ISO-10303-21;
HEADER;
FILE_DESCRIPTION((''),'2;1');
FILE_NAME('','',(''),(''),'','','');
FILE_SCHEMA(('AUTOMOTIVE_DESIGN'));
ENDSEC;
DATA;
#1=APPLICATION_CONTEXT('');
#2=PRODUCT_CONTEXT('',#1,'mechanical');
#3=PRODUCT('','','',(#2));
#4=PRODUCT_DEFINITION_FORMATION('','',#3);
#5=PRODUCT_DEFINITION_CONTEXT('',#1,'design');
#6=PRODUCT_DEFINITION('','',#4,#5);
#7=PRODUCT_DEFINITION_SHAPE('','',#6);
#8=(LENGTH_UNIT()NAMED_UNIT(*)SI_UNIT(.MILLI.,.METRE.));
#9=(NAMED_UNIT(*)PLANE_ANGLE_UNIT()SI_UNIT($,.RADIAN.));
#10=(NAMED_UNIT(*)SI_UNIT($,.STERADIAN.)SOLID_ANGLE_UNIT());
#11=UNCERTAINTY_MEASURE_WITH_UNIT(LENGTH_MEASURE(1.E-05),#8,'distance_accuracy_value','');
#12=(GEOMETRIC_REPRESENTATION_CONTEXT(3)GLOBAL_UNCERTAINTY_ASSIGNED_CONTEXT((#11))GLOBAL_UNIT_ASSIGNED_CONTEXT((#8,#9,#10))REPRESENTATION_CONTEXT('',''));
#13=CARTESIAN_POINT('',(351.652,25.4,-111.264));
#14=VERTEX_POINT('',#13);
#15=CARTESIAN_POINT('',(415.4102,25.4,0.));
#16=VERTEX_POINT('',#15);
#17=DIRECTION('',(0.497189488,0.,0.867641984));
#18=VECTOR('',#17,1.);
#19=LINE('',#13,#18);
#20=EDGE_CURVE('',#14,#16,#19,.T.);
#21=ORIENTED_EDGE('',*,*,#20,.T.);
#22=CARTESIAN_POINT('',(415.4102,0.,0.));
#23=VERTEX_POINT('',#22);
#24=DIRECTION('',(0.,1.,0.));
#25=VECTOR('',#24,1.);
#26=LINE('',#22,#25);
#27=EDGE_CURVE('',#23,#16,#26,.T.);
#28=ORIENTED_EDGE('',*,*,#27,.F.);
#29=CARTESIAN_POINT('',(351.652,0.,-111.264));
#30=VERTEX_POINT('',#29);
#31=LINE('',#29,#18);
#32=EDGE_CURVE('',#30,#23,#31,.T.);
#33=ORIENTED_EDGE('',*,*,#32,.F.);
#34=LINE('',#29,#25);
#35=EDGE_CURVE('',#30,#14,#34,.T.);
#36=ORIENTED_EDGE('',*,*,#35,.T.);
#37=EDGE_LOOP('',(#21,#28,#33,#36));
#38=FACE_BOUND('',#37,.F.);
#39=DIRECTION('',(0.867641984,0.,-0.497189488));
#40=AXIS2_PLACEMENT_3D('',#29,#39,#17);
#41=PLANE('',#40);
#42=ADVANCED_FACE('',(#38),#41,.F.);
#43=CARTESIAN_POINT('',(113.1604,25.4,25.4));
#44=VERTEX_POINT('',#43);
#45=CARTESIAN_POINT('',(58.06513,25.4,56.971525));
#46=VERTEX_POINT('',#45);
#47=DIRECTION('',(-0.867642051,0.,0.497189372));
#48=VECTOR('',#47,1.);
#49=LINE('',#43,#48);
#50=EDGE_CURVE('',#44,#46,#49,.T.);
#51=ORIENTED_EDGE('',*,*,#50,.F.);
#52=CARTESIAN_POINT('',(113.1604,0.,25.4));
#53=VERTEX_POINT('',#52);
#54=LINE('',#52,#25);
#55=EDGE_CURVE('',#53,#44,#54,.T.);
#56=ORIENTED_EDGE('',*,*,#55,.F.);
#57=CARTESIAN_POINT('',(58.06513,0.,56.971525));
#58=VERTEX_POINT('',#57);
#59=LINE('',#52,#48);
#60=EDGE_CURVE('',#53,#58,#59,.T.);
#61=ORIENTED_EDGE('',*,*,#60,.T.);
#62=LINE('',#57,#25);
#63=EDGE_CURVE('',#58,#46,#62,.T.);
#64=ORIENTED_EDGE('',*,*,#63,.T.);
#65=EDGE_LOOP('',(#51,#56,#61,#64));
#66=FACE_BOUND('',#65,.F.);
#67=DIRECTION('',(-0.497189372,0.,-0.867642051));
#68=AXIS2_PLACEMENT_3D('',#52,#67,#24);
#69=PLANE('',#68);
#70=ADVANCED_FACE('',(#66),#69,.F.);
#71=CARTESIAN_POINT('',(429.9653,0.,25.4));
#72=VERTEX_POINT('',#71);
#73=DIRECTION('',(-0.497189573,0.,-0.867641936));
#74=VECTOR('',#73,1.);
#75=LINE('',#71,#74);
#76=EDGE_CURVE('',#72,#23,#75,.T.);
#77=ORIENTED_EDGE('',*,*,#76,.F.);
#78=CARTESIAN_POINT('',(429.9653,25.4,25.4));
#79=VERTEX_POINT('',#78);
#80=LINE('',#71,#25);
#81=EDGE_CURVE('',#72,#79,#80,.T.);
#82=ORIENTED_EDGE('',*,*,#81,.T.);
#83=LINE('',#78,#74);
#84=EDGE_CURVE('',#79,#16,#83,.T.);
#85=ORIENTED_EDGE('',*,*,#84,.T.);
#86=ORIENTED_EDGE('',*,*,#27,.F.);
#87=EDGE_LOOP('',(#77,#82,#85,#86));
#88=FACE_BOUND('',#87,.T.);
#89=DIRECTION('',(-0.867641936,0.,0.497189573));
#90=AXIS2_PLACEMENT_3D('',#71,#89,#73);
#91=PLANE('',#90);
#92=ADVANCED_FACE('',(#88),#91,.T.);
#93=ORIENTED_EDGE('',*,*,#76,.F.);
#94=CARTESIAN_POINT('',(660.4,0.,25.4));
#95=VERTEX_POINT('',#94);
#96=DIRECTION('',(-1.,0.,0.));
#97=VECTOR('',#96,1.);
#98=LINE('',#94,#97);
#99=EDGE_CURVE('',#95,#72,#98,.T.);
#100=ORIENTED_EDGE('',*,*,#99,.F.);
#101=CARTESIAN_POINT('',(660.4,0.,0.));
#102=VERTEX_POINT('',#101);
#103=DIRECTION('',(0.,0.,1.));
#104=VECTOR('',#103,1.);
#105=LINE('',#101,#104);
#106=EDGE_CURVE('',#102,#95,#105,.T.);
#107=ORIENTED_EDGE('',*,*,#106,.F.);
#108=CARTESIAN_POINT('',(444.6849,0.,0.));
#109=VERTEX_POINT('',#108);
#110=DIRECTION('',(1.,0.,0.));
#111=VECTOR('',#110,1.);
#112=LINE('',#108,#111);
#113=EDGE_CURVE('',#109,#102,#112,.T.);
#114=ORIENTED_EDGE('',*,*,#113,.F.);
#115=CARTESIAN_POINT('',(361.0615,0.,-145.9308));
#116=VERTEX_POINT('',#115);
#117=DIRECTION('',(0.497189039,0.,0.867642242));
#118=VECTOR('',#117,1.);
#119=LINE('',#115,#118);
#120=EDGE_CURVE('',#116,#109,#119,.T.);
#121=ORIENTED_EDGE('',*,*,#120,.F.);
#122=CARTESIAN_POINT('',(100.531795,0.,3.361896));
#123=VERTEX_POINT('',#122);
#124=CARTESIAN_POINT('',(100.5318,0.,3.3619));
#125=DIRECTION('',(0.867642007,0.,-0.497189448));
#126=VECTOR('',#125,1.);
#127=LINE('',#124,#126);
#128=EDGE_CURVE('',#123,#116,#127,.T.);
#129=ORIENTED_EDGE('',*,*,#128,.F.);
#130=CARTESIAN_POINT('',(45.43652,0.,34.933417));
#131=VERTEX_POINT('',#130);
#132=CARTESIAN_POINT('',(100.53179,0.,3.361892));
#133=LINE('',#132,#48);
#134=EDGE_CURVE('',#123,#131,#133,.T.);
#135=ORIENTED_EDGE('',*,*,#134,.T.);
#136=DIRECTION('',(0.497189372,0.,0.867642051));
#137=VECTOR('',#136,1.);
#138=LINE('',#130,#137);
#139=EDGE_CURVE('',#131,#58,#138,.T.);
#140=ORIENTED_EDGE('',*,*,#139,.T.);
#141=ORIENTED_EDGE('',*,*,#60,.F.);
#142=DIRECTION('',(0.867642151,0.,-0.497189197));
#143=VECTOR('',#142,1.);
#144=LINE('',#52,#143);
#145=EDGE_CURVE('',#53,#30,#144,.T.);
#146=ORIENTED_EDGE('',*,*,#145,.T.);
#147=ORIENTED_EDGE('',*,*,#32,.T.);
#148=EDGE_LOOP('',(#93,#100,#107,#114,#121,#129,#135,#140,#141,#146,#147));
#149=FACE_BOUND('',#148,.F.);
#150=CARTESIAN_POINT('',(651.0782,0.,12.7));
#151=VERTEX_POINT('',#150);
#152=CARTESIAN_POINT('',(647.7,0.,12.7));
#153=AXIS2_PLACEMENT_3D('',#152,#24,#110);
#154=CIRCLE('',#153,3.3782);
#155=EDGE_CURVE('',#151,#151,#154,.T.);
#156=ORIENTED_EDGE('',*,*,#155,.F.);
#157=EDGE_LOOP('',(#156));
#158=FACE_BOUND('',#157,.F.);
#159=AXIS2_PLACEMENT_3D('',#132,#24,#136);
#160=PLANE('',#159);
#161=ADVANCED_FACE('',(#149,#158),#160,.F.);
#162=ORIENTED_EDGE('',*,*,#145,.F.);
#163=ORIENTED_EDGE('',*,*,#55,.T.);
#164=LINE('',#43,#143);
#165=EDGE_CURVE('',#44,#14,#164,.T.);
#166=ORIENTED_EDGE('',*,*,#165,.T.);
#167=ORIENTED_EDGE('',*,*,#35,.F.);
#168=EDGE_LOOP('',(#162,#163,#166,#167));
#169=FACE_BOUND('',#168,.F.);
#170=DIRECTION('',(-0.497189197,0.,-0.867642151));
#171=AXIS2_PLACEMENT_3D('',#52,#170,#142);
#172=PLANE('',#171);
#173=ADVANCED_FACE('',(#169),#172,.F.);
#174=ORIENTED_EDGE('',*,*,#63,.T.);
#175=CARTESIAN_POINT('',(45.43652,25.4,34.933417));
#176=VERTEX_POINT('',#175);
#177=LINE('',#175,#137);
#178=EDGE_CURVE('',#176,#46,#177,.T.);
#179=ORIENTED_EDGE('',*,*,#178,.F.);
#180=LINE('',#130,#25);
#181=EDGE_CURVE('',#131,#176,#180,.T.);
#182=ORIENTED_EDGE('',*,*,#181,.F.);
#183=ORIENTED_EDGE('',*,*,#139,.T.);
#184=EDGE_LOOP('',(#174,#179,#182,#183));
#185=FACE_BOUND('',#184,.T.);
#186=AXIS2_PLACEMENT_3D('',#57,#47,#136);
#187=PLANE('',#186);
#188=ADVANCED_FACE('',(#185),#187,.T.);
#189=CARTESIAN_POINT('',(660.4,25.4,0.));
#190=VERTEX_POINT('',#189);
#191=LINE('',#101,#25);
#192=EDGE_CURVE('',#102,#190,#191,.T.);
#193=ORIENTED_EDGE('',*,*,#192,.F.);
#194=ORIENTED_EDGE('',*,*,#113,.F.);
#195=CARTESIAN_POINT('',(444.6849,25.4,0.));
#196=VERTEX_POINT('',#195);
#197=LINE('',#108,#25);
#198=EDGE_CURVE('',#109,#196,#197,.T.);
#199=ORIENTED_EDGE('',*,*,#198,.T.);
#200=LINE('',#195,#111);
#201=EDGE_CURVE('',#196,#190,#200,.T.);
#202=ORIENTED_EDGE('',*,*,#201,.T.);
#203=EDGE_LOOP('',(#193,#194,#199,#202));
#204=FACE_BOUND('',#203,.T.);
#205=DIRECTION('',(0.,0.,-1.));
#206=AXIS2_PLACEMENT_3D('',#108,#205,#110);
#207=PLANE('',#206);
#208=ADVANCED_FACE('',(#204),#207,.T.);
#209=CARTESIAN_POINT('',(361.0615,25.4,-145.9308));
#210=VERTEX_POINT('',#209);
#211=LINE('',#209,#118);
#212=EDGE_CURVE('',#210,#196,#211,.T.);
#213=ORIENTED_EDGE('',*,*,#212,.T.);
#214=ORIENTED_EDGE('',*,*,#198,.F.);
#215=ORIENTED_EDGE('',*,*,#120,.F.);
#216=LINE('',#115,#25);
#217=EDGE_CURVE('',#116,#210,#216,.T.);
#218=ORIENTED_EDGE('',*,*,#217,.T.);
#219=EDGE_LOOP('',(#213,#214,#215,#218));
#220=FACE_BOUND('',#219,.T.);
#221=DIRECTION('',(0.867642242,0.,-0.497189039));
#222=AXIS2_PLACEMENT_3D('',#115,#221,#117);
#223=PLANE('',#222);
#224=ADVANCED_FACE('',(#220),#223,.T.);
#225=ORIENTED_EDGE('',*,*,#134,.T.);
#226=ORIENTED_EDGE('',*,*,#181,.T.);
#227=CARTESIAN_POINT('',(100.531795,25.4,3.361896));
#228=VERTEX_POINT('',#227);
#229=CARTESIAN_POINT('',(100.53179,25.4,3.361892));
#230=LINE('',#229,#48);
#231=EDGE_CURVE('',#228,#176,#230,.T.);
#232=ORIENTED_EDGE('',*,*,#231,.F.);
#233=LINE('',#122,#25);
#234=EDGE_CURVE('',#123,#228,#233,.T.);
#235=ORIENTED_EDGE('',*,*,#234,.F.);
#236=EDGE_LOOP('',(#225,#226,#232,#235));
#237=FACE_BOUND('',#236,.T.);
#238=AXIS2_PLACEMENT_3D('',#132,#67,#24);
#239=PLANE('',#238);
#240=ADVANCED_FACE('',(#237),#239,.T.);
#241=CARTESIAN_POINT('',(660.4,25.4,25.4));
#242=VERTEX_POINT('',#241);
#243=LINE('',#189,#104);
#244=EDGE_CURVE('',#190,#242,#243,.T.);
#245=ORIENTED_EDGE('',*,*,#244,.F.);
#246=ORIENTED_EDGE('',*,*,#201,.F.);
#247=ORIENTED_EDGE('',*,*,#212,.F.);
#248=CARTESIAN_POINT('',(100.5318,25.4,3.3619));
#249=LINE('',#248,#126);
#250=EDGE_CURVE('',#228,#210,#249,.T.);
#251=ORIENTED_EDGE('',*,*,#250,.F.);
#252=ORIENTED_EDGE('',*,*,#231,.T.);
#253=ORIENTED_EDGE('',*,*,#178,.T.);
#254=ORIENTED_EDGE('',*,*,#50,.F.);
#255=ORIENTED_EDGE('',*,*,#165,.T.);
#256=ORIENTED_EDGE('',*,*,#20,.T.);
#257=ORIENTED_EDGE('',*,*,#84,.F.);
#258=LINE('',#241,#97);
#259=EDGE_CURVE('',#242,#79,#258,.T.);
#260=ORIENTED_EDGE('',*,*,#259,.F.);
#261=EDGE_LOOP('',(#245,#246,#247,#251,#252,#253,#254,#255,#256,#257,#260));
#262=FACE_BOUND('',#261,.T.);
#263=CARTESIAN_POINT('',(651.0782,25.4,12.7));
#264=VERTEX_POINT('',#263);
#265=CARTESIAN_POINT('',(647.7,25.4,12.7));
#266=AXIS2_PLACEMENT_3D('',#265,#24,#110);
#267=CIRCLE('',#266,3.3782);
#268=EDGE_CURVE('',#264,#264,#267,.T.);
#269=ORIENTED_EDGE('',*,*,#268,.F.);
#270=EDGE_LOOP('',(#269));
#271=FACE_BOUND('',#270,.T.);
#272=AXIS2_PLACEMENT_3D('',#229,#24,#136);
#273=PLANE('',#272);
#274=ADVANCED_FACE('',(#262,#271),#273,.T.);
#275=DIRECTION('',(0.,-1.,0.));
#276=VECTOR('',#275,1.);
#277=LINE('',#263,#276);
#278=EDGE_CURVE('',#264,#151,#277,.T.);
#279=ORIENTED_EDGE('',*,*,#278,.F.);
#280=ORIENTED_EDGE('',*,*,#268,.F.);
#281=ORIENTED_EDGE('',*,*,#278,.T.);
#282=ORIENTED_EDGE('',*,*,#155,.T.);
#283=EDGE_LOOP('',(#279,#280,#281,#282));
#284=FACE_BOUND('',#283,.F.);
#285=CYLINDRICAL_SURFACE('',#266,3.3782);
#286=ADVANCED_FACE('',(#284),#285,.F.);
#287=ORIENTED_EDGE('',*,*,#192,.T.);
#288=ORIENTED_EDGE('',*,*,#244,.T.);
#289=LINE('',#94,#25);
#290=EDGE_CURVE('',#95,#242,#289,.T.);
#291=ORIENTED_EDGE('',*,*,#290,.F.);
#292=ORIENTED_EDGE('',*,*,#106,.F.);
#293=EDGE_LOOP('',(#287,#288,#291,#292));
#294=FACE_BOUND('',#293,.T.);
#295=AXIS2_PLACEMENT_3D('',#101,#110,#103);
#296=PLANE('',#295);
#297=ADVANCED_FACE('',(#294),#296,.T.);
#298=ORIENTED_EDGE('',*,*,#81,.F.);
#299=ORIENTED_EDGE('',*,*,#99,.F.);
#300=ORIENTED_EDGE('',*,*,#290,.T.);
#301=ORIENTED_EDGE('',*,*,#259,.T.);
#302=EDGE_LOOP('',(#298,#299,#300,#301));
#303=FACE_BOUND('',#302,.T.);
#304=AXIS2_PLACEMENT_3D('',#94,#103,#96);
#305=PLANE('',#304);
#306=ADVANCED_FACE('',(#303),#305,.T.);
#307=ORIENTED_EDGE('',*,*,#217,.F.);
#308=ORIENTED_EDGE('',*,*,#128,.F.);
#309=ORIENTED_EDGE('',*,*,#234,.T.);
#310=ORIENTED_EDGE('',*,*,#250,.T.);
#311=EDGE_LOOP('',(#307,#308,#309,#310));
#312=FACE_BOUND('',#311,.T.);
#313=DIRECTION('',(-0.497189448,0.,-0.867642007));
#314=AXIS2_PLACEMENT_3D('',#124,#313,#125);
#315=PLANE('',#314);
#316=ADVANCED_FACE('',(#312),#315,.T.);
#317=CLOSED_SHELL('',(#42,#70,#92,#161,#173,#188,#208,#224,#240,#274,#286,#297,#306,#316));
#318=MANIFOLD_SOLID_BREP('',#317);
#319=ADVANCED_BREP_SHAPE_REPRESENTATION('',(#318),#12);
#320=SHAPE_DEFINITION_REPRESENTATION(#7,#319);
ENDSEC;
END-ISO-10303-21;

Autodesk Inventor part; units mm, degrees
ref_plane "YZ Plane" through (0, 0, 0) normal (1, 0, 0) x (0, 1, 0)
ref_plane "XZ Plane" through (0, 0, 0) normal (0, 1, 0) x (-1, 0, 0)
ref_plane "XY Plane" through (0, 0, 0) normal (0, 0, 1) x (1, 0, 0)
sketch "Sketch1" plane through (0, 0, 0) normal (0, 1, 0) x (-1, 0, 0)
  line L0 (-660.4, 0) -> (-660.4, 25.4)
  line L1 (-113.1604, 25.4) -> (-351.652, -111.264)
  line L2 (-351.652, -111.264) -> (-415.4102, 0)
  line L3 (-444.6849, 0) -> (-660.4, 0)
  line L4 (-660.4, 0) -> (-660.4, 25.4)
  line L5 (-660.4, 25.4) -> (-429.9653, 25.4)
  line L6 (-429.9653, 25.4) -> (-415.4102, 0)
  line L7 (-113.1604, 25.4) -> (-100.5318, 3.3619)
  line L8 (-100.5318, 3.3619) -> (-361.0615, -145.9308)
  line L9 (-361.0615, -145.9308) -> (-444.6849, 0)
  line L10 (-660.4, 0) -> (-660.4, 25.4)
  line L11 (-113.1604, 25.4) -> (-351.652, -111.264)
  line L12 (-351.652, -111.264) -> (-415.4102, 0)
  line L13 (-444.6849, 0) -> (-660.4, 0)
  line L14 (-660.4, 0) -> (-660.4, 25.4)
  line L15 (-660.4, 25.4) -> (-429.9653, 25.4)
  line L16 (-429.9653, 25.4) -> (-415.4102, 0)
  line L17 (-113.1604, 25.4) -> (-100.5318, 3.3619)
  line L18 (-100.5318, 3.3619) -> (-361.0615, -145.9308)
  line L19 (-361.0615, -145.9308) -> (-444.6849, 0)
  point P0 (0, 0)
  point P1 (-113.1604, 0)
  point P2 (-113.1604, 0)
  dimension "d0" = 25.4
  dimension "d1" = 25.4
  dimension "d2" = 25.4
  dimension "d3" = 25.4
  dimension "d4" = 25.4
  dimension "d5" = 25.4
extrude "Extrusion1" add sketch "Sketch1" along normal blind 25.4
sketch "Sketch2" plane through (0, 25.4, 0) normal (0, 1, 0) x (1, 0, 0)
  line L0 (660.4, -25.4) -> (660.4, 0) projected
  line L1 (429.9653, -25.4) -> (660.4, -25.4) projected
  line L2 (660.4, -12.7) -> (647.7, -12.7)
  circle A0 centre (647.7, -12.7) radius 3.3782
  point P0 (0, 0)
  dimension "d8" = 12.7
  dimension "d9" = 6.7564
extrude "Extrusion2" cut sketch "Sketch2" against normal blind 25.4
sketch "Sketch3" plane through (113.1604, 0, 25.4) normal (-0.8676421, 0, 0.4971894) x (0.4971894, 0, 0.8676421)
  line L0 (-25.4, 0) -> (0, 0) projected
  line L1 (0, 0) -> (0, 25.4) projected
  line L2 (-25.4, 25.4) -> (0, 25.4) projected
  line L3 (-25.4, 0) -> (-25.4, 25.4) projected
  point P0 (-78.3002, 0)
extrude "Extrusion3" add sketch "Sketch3" along normal blind 63.5
properties part number "bar 3"
